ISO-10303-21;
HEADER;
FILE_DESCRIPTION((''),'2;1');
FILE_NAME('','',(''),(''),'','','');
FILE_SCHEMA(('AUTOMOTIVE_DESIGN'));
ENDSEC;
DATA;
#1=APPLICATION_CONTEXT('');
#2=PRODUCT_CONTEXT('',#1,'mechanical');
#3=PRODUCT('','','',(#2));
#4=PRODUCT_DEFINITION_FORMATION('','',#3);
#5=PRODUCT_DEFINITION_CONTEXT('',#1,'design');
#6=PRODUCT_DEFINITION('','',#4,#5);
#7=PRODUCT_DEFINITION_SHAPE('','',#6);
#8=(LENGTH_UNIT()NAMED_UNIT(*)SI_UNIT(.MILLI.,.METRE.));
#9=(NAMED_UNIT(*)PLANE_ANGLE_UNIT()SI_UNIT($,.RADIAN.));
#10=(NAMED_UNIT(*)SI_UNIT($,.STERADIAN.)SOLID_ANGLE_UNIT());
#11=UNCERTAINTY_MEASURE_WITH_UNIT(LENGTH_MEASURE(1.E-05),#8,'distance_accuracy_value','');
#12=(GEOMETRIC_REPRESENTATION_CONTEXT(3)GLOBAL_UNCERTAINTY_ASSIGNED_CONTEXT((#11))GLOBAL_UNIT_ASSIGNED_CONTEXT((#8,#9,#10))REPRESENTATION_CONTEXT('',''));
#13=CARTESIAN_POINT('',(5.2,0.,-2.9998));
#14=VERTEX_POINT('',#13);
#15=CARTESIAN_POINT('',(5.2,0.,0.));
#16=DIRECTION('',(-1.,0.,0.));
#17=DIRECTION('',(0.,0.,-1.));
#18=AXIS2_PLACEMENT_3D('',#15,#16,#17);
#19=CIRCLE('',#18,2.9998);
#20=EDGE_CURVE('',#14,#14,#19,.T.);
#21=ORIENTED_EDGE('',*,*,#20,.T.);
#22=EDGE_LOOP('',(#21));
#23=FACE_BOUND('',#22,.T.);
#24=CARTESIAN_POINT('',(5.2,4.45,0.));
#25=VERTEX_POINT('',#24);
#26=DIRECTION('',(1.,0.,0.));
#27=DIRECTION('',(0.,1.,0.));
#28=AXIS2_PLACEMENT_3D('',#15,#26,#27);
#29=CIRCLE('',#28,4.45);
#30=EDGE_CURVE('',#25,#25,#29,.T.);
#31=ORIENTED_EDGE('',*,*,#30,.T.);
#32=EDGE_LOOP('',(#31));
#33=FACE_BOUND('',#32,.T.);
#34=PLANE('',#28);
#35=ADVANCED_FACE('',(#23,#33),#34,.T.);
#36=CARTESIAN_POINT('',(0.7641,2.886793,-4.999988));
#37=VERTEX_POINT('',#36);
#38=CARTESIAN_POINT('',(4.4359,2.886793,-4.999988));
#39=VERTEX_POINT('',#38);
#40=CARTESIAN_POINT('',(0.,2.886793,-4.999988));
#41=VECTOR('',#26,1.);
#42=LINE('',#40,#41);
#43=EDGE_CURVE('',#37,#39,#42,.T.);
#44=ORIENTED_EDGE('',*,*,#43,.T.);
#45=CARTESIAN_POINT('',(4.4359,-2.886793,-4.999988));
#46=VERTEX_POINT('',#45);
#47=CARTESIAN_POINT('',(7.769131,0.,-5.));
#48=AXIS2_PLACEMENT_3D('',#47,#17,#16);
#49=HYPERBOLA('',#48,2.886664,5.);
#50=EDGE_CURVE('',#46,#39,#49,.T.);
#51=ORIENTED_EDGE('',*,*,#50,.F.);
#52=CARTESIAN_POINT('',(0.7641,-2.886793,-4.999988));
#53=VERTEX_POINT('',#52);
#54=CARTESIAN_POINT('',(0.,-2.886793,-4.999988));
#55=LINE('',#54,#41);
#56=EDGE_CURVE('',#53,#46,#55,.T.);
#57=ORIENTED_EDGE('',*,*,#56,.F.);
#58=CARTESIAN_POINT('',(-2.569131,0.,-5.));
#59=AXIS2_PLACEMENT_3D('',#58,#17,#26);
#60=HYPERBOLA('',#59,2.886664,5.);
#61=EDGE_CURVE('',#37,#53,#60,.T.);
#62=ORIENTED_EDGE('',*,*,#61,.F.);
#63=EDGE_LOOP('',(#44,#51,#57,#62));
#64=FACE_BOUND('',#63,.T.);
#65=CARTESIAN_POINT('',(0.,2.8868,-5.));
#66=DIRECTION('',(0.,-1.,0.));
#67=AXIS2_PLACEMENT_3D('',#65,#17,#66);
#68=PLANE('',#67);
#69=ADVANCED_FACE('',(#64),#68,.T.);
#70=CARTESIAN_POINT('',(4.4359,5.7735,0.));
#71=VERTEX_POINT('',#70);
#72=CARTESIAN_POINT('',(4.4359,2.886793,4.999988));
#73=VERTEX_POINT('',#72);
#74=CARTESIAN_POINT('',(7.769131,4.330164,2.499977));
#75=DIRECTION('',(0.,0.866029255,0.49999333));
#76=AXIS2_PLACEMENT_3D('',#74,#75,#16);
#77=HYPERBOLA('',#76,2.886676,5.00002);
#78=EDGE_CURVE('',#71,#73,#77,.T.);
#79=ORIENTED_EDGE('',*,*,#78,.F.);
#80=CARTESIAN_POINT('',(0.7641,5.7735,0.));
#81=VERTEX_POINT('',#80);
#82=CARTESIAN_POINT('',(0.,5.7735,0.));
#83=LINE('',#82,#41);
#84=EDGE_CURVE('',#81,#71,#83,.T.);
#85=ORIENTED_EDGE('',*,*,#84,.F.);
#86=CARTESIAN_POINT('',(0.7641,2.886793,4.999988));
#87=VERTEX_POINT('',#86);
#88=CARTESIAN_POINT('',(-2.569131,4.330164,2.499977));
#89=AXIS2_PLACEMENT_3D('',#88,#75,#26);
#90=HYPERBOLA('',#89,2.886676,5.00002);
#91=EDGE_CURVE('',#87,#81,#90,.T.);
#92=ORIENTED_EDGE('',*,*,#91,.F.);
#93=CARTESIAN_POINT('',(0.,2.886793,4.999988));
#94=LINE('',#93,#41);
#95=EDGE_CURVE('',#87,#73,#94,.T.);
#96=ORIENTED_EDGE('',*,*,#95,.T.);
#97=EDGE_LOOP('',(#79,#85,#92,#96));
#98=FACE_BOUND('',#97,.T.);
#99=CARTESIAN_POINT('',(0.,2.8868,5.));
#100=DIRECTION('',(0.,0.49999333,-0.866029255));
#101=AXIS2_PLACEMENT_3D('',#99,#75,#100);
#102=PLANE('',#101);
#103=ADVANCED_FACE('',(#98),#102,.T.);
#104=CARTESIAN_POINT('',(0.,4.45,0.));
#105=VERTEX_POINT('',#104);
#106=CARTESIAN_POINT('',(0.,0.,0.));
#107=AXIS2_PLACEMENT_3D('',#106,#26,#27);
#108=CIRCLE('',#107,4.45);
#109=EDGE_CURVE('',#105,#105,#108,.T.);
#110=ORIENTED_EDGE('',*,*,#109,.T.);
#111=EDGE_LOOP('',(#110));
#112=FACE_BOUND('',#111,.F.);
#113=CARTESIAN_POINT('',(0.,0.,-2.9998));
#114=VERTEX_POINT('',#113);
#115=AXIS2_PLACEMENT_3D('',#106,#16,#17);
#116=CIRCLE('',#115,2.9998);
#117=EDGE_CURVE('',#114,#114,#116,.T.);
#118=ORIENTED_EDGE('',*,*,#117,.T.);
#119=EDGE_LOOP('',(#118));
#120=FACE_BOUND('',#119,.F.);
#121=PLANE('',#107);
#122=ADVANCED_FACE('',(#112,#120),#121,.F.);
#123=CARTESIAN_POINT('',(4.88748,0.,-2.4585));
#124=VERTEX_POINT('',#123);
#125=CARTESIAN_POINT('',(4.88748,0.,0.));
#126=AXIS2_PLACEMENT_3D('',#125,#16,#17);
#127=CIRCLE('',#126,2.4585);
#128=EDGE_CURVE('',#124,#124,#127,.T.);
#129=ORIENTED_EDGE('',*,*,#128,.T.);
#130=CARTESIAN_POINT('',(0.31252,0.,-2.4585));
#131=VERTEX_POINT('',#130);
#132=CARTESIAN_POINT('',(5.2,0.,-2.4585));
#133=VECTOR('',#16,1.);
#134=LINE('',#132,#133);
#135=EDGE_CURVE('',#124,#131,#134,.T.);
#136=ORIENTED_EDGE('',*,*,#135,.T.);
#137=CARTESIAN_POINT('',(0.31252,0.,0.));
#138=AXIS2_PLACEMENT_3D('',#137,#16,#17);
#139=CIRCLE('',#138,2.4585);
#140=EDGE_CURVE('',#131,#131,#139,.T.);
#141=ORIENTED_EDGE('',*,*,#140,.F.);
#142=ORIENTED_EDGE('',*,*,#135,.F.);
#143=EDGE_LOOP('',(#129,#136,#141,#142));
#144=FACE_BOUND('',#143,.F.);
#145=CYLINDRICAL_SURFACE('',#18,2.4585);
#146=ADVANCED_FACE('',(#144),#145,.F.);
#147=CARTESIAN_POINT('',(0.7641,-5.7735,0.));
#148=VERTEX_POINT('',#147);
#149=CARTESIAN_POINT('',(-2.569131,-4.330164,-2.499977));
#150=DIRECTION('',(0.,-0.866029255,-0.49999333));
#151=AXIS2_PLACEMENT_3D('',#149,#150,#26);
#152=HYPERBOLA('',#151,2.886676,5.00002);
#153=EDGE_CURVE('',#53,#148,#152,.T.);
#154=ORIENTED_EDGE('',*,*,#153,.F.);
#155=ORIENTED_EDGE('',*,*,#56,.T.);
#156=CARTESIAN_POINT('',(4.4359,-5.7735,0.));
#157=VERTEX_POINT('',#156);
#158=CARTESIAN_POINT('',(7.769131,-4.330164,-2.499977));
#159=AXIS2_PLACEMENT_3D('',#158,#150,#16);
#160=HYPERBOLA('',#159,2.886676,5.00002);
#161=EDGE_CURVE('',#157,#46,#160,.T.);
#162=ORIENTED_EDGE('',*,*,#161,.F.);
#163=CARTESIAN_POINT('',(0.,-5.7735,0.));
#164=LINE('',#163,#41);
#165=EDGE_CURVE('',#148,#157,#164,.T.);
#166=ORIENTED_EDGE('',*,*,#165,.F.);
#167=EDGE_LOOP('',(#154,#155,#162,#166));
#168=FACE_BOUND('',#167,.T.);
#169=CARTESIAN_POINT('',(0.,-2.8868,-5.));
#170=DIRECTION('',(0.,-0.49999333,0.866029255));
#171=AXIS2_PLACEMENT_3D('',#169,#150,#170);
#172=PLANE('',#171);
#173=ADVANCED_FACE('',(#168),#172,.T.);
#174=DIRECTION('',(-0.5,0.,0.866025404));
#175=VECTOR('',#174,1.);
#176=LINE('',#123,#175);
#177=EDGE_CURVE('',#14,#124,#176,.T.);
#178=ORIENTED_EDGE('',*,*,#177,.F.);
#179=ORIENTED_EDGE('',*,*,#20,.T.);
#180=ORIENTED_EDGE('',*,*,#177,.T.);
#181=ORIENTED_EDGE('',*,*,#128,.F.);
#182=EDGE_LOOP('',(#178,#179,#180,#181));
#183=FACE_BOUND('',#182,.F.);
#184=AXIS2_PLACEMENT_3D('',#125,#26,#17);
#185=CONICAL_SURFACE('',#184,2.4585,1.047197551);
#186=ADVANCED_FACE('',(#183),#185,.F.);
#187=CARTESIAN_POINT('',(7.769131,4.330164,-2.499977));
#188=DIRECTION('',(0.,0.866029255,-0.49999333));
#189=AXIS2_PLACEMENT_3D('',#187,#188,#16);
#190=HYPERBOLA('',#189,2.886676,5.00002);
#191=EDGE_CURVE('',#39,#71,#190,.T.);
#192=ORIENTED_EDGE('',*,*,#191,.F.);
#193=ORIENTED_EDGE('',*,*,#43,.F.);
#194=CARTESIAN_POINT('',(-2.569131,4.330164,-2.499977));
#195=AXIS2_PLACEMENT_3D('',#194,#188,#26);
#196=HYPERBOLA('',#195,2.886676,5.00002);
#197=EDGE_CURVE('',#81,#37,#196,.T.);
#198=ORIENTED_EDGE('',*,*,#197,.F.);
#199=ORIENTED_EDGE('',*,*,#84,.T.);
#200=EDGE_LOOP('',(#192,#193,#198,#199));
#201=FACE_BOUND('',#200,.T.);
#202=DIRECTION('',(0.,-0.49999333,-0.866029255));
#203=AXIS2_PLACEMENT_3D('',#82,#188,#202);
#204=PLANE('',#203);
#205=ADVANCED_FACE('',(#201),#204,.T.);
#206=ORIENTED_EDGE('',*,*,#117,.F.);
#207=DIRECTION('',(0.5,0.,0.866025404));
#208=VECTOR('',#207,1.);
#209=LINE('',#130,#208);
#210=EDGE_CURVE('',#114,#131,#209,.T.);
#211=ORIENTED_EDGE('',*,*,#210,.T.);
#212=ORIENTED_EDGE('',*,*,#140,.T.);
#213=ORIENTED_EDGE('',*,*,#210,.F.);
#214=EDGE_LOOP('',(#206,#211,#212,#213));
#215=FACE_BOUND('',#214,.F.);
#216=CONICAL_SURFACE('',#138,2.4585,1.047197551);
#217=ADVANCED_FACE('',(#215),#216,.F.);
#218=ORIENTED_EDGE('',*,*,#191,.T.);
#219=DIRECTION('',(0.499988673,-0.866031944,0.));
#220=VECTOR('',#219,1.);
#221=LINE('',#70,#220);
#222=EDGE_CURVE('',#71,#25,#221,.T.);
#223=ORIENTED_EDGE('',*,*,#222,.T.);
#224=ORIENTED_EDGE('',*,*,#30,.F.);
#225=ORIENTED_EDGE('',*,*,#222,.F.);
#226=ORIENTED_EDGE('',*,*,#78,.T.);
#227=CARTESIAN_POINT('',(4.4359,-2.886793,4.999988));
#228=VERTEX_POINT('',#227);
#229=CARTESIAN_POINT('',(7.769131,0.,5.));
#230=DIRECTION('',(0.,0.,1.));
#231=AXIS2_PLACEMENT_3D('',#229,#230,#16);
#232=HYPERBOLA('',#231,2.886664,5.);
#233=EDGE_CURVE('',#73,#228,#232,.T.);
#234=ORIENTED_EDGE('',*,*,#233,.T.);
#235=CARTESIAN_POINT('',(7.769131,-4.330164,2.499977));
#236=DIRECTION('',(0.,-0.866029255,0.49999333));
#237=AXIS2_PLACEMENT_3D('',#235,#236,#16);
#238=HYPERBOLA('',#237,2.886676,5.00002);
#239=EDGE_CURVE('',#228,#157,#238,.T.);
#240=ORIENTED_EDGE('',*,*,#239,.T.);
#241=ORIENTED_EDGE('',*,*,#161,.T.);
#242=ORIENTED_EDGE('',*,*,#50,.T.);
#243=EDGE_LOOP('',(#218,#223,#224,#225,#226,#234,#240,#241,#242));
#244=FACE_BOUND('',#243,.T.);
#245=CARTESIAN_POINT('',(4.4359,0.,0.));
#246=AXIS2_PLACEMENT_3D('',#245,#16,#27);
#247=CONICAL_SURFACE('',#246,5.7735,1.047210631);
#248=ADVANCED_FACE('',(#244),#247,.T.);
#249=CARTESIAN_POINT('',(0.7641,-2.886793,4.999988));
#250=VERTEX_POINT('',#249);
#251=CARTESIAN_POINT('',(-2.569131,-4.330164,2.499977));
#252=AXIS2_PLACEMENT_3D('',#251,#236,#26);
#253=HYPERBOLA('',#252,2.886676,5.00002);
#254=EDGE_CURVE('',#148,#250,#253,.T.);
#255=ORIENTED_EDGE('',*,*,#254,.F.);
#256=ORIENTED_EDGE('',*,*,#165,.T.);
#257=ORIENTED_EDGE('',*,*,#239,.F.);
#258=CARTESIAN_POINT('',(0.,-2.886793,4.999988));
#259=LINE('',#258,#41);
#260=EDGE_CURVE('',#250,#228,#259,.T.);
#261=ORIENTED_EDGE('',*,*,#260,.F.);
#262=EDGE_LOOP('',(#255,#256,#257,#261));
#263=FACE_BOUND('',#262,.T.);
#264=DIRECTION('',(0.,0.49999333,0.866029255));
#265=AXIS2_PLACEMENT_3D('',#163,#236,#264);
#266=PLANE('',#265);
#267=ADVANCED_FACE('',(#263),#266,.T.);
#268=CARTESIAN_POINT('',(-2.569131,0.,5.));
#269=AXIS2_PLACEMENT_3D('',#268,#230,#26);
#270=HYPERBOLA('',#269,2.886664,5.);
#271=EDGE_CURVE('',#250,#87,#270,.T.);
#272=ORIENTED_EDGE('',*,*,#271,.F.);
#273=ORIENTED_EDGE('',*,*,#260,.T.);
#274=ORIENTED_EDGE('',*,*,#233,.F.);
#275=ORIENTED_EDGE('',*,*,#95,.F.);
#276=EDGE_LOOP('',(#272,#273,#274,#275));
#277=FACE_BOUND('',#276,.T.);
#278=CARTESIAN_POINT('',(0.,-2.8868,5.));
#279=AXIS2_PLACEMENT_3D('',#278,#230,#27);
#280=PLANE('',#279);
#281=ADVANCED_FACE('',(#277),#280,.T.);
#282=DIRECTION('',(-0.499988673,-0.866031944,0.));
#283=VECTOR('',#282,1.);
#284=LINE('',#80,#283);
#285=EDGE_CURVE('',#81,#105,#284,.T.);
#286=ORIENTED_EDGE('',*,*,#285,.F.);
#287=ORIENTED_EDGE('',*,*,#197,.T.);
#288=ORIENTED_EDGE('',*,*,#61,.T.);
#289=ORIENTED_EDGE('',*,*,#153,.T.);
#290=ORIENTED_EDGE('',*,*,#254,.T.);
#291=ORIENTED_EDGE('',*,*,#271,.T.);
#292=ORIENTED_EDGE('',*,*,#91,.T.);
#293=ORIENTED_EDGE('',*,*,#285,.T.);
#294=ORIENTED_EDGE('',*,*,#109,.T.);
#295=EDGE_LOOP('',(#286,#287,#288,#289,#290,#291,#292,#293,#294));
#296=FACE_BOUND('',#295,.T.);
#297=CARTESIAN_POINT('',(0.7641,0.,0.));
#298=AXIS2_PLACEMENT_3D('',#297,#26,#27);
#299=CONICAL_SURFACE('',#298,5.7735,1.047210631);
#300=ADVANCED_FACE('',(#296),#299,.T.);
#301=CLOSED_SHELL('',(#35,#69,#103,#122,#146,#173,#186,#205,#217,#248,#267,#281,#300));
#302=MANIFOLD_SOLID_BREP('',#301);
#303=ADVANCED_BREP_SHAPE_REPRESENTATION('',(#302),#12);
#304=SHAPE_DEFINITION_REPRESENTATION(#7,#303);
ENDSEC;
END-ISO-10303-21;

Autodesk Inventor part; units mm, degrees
ref_plane "YZ Plane" through (0, 0, 0) normal (1, 0, 0) x (0, 1, 0)
ref_plane "XZ Plane" through (0, 0, 0) normal (0, 1, 0) x (-1, 0, 0)
sketch "Skizze1" plane through (0, 0, 0) normal (1, 0, 0) x (0, 1, 0)
  line L0 (-5.7735, 0) -> (-2.8868, 5)
  line L1 (-2.8868, 5) -> (2.8868, 5)
  line L2 (2.8868, 5) -> (5.7735, 0)
  line L3 (5.7735, 0) -> (2.8868, -5)
  line L4 (2.8868, -5) -> (-2.8868, -5)
  line L5 (-2.8868, -5) -> (-5.7735, 0)
  point P0 (0, 0)
  point P1 (0, 0)
  dimension "d0" = 11.547
extrude "Körper" add sketch "Skizze1" along normal blind 5.2
sketch "Skizze2" plane through (0, 0, 0) normal (0, 0, 1) x (1, 0, 0)
  line L0 (0, 2.8868) -> (0, 5.7735) projected
  line L1 (0, 5.7735) -> (5.2, 5.7735) projected
  line L2 (5.2, 2.8868) -> (5.2, 5.7735) projected
  line L3 (-1.04, 0) -> (6.24, 0) projected
  line L4 (0.7641, 5.7735) -> (0, 4.45)
  line L5 (4.4359, 5.7735) -> (5.2, 4.45)
  dimension "d3" = 30
  dimension "d4" = 30
  dimension "d5" = 8.9
  dimension "d6" = 8.9
revolve "Fase1" cut sketch "Skizze2" angle 360 about axis through (-10, 0, 0) along (1, 0, 0)
sketch "Skizze3" plane through (5.2, 0, 0) normal (1, 0, 0) x (0, 0, -1)
  arc A0 (-0.625, -1.0825) -> (0.625, -1.0825) centre (0, 0) ccw projected
hole "Gewinde" at (5.2, 0, 0) direction (-1, 0, 0) diameter 4.917 end through all thread size "M6x1" class "6H" standard "ISO Metric profile"
chamfer "Fase2" distance 0.5413 angle 30 1 edges at (5.2, 0, 2.4585) measured on face at (5.2, 3.7371, -0.4538)
chamfer "Fase3" distance 0.5413 angle 30 1 edges at (0, 0, 2.4585) measured on face at (0, 3.7371, -0.4538)
ref_plane "Work Plane1" through (-10.9812, 0, 0) normal (0, -0.8660254, -0.5) x (1, 0, 0)
equation "\"d0\" = 1.1547 * SW"
equation "\"d1\" = KOH"
equation "\"d8\" = -0.5 * GD1 + 0.5 * NND"
equation "\"d40\" = -0.5 * GD1 + 0.5 * NND"
equation "\"d10\" = -0.5 * GD1 + 0.5 * NND"
equation "\"d41\" = -0.5 * GD1 + 0.5 * NND"
equation "\"d3\" = ANG1"
equation "\"d4\" = ANG2"
equation "\"d5\" = SW0"
equation "\"d6\" = SW01"
equation "\"ANG1\" = 30deg"
equation "\"ANG2\" = 30deg"
equation "\"NND\" = 6"
equation "\"KOH\" = 5.2"
equation "\"SW0\" = 8.9"
equation "\"SW01\" = SW0"
equation "\"GUL\" = 0.541266 * PTC"
equation "\"THREADDIA\" = 6"
equation "\"TOA\" = 30deg"
equation "\"PTC\" = 1"
equation "\"E0\" = 1.155 * SW"
equation "\"GAL\" = 0.541266 * PTC"
equation "\"SW\" = 10"
equation "\"GD1\" = 4.917468"
properties part number "ISO 4032 - M6" material "Edelstahl, 440C"
